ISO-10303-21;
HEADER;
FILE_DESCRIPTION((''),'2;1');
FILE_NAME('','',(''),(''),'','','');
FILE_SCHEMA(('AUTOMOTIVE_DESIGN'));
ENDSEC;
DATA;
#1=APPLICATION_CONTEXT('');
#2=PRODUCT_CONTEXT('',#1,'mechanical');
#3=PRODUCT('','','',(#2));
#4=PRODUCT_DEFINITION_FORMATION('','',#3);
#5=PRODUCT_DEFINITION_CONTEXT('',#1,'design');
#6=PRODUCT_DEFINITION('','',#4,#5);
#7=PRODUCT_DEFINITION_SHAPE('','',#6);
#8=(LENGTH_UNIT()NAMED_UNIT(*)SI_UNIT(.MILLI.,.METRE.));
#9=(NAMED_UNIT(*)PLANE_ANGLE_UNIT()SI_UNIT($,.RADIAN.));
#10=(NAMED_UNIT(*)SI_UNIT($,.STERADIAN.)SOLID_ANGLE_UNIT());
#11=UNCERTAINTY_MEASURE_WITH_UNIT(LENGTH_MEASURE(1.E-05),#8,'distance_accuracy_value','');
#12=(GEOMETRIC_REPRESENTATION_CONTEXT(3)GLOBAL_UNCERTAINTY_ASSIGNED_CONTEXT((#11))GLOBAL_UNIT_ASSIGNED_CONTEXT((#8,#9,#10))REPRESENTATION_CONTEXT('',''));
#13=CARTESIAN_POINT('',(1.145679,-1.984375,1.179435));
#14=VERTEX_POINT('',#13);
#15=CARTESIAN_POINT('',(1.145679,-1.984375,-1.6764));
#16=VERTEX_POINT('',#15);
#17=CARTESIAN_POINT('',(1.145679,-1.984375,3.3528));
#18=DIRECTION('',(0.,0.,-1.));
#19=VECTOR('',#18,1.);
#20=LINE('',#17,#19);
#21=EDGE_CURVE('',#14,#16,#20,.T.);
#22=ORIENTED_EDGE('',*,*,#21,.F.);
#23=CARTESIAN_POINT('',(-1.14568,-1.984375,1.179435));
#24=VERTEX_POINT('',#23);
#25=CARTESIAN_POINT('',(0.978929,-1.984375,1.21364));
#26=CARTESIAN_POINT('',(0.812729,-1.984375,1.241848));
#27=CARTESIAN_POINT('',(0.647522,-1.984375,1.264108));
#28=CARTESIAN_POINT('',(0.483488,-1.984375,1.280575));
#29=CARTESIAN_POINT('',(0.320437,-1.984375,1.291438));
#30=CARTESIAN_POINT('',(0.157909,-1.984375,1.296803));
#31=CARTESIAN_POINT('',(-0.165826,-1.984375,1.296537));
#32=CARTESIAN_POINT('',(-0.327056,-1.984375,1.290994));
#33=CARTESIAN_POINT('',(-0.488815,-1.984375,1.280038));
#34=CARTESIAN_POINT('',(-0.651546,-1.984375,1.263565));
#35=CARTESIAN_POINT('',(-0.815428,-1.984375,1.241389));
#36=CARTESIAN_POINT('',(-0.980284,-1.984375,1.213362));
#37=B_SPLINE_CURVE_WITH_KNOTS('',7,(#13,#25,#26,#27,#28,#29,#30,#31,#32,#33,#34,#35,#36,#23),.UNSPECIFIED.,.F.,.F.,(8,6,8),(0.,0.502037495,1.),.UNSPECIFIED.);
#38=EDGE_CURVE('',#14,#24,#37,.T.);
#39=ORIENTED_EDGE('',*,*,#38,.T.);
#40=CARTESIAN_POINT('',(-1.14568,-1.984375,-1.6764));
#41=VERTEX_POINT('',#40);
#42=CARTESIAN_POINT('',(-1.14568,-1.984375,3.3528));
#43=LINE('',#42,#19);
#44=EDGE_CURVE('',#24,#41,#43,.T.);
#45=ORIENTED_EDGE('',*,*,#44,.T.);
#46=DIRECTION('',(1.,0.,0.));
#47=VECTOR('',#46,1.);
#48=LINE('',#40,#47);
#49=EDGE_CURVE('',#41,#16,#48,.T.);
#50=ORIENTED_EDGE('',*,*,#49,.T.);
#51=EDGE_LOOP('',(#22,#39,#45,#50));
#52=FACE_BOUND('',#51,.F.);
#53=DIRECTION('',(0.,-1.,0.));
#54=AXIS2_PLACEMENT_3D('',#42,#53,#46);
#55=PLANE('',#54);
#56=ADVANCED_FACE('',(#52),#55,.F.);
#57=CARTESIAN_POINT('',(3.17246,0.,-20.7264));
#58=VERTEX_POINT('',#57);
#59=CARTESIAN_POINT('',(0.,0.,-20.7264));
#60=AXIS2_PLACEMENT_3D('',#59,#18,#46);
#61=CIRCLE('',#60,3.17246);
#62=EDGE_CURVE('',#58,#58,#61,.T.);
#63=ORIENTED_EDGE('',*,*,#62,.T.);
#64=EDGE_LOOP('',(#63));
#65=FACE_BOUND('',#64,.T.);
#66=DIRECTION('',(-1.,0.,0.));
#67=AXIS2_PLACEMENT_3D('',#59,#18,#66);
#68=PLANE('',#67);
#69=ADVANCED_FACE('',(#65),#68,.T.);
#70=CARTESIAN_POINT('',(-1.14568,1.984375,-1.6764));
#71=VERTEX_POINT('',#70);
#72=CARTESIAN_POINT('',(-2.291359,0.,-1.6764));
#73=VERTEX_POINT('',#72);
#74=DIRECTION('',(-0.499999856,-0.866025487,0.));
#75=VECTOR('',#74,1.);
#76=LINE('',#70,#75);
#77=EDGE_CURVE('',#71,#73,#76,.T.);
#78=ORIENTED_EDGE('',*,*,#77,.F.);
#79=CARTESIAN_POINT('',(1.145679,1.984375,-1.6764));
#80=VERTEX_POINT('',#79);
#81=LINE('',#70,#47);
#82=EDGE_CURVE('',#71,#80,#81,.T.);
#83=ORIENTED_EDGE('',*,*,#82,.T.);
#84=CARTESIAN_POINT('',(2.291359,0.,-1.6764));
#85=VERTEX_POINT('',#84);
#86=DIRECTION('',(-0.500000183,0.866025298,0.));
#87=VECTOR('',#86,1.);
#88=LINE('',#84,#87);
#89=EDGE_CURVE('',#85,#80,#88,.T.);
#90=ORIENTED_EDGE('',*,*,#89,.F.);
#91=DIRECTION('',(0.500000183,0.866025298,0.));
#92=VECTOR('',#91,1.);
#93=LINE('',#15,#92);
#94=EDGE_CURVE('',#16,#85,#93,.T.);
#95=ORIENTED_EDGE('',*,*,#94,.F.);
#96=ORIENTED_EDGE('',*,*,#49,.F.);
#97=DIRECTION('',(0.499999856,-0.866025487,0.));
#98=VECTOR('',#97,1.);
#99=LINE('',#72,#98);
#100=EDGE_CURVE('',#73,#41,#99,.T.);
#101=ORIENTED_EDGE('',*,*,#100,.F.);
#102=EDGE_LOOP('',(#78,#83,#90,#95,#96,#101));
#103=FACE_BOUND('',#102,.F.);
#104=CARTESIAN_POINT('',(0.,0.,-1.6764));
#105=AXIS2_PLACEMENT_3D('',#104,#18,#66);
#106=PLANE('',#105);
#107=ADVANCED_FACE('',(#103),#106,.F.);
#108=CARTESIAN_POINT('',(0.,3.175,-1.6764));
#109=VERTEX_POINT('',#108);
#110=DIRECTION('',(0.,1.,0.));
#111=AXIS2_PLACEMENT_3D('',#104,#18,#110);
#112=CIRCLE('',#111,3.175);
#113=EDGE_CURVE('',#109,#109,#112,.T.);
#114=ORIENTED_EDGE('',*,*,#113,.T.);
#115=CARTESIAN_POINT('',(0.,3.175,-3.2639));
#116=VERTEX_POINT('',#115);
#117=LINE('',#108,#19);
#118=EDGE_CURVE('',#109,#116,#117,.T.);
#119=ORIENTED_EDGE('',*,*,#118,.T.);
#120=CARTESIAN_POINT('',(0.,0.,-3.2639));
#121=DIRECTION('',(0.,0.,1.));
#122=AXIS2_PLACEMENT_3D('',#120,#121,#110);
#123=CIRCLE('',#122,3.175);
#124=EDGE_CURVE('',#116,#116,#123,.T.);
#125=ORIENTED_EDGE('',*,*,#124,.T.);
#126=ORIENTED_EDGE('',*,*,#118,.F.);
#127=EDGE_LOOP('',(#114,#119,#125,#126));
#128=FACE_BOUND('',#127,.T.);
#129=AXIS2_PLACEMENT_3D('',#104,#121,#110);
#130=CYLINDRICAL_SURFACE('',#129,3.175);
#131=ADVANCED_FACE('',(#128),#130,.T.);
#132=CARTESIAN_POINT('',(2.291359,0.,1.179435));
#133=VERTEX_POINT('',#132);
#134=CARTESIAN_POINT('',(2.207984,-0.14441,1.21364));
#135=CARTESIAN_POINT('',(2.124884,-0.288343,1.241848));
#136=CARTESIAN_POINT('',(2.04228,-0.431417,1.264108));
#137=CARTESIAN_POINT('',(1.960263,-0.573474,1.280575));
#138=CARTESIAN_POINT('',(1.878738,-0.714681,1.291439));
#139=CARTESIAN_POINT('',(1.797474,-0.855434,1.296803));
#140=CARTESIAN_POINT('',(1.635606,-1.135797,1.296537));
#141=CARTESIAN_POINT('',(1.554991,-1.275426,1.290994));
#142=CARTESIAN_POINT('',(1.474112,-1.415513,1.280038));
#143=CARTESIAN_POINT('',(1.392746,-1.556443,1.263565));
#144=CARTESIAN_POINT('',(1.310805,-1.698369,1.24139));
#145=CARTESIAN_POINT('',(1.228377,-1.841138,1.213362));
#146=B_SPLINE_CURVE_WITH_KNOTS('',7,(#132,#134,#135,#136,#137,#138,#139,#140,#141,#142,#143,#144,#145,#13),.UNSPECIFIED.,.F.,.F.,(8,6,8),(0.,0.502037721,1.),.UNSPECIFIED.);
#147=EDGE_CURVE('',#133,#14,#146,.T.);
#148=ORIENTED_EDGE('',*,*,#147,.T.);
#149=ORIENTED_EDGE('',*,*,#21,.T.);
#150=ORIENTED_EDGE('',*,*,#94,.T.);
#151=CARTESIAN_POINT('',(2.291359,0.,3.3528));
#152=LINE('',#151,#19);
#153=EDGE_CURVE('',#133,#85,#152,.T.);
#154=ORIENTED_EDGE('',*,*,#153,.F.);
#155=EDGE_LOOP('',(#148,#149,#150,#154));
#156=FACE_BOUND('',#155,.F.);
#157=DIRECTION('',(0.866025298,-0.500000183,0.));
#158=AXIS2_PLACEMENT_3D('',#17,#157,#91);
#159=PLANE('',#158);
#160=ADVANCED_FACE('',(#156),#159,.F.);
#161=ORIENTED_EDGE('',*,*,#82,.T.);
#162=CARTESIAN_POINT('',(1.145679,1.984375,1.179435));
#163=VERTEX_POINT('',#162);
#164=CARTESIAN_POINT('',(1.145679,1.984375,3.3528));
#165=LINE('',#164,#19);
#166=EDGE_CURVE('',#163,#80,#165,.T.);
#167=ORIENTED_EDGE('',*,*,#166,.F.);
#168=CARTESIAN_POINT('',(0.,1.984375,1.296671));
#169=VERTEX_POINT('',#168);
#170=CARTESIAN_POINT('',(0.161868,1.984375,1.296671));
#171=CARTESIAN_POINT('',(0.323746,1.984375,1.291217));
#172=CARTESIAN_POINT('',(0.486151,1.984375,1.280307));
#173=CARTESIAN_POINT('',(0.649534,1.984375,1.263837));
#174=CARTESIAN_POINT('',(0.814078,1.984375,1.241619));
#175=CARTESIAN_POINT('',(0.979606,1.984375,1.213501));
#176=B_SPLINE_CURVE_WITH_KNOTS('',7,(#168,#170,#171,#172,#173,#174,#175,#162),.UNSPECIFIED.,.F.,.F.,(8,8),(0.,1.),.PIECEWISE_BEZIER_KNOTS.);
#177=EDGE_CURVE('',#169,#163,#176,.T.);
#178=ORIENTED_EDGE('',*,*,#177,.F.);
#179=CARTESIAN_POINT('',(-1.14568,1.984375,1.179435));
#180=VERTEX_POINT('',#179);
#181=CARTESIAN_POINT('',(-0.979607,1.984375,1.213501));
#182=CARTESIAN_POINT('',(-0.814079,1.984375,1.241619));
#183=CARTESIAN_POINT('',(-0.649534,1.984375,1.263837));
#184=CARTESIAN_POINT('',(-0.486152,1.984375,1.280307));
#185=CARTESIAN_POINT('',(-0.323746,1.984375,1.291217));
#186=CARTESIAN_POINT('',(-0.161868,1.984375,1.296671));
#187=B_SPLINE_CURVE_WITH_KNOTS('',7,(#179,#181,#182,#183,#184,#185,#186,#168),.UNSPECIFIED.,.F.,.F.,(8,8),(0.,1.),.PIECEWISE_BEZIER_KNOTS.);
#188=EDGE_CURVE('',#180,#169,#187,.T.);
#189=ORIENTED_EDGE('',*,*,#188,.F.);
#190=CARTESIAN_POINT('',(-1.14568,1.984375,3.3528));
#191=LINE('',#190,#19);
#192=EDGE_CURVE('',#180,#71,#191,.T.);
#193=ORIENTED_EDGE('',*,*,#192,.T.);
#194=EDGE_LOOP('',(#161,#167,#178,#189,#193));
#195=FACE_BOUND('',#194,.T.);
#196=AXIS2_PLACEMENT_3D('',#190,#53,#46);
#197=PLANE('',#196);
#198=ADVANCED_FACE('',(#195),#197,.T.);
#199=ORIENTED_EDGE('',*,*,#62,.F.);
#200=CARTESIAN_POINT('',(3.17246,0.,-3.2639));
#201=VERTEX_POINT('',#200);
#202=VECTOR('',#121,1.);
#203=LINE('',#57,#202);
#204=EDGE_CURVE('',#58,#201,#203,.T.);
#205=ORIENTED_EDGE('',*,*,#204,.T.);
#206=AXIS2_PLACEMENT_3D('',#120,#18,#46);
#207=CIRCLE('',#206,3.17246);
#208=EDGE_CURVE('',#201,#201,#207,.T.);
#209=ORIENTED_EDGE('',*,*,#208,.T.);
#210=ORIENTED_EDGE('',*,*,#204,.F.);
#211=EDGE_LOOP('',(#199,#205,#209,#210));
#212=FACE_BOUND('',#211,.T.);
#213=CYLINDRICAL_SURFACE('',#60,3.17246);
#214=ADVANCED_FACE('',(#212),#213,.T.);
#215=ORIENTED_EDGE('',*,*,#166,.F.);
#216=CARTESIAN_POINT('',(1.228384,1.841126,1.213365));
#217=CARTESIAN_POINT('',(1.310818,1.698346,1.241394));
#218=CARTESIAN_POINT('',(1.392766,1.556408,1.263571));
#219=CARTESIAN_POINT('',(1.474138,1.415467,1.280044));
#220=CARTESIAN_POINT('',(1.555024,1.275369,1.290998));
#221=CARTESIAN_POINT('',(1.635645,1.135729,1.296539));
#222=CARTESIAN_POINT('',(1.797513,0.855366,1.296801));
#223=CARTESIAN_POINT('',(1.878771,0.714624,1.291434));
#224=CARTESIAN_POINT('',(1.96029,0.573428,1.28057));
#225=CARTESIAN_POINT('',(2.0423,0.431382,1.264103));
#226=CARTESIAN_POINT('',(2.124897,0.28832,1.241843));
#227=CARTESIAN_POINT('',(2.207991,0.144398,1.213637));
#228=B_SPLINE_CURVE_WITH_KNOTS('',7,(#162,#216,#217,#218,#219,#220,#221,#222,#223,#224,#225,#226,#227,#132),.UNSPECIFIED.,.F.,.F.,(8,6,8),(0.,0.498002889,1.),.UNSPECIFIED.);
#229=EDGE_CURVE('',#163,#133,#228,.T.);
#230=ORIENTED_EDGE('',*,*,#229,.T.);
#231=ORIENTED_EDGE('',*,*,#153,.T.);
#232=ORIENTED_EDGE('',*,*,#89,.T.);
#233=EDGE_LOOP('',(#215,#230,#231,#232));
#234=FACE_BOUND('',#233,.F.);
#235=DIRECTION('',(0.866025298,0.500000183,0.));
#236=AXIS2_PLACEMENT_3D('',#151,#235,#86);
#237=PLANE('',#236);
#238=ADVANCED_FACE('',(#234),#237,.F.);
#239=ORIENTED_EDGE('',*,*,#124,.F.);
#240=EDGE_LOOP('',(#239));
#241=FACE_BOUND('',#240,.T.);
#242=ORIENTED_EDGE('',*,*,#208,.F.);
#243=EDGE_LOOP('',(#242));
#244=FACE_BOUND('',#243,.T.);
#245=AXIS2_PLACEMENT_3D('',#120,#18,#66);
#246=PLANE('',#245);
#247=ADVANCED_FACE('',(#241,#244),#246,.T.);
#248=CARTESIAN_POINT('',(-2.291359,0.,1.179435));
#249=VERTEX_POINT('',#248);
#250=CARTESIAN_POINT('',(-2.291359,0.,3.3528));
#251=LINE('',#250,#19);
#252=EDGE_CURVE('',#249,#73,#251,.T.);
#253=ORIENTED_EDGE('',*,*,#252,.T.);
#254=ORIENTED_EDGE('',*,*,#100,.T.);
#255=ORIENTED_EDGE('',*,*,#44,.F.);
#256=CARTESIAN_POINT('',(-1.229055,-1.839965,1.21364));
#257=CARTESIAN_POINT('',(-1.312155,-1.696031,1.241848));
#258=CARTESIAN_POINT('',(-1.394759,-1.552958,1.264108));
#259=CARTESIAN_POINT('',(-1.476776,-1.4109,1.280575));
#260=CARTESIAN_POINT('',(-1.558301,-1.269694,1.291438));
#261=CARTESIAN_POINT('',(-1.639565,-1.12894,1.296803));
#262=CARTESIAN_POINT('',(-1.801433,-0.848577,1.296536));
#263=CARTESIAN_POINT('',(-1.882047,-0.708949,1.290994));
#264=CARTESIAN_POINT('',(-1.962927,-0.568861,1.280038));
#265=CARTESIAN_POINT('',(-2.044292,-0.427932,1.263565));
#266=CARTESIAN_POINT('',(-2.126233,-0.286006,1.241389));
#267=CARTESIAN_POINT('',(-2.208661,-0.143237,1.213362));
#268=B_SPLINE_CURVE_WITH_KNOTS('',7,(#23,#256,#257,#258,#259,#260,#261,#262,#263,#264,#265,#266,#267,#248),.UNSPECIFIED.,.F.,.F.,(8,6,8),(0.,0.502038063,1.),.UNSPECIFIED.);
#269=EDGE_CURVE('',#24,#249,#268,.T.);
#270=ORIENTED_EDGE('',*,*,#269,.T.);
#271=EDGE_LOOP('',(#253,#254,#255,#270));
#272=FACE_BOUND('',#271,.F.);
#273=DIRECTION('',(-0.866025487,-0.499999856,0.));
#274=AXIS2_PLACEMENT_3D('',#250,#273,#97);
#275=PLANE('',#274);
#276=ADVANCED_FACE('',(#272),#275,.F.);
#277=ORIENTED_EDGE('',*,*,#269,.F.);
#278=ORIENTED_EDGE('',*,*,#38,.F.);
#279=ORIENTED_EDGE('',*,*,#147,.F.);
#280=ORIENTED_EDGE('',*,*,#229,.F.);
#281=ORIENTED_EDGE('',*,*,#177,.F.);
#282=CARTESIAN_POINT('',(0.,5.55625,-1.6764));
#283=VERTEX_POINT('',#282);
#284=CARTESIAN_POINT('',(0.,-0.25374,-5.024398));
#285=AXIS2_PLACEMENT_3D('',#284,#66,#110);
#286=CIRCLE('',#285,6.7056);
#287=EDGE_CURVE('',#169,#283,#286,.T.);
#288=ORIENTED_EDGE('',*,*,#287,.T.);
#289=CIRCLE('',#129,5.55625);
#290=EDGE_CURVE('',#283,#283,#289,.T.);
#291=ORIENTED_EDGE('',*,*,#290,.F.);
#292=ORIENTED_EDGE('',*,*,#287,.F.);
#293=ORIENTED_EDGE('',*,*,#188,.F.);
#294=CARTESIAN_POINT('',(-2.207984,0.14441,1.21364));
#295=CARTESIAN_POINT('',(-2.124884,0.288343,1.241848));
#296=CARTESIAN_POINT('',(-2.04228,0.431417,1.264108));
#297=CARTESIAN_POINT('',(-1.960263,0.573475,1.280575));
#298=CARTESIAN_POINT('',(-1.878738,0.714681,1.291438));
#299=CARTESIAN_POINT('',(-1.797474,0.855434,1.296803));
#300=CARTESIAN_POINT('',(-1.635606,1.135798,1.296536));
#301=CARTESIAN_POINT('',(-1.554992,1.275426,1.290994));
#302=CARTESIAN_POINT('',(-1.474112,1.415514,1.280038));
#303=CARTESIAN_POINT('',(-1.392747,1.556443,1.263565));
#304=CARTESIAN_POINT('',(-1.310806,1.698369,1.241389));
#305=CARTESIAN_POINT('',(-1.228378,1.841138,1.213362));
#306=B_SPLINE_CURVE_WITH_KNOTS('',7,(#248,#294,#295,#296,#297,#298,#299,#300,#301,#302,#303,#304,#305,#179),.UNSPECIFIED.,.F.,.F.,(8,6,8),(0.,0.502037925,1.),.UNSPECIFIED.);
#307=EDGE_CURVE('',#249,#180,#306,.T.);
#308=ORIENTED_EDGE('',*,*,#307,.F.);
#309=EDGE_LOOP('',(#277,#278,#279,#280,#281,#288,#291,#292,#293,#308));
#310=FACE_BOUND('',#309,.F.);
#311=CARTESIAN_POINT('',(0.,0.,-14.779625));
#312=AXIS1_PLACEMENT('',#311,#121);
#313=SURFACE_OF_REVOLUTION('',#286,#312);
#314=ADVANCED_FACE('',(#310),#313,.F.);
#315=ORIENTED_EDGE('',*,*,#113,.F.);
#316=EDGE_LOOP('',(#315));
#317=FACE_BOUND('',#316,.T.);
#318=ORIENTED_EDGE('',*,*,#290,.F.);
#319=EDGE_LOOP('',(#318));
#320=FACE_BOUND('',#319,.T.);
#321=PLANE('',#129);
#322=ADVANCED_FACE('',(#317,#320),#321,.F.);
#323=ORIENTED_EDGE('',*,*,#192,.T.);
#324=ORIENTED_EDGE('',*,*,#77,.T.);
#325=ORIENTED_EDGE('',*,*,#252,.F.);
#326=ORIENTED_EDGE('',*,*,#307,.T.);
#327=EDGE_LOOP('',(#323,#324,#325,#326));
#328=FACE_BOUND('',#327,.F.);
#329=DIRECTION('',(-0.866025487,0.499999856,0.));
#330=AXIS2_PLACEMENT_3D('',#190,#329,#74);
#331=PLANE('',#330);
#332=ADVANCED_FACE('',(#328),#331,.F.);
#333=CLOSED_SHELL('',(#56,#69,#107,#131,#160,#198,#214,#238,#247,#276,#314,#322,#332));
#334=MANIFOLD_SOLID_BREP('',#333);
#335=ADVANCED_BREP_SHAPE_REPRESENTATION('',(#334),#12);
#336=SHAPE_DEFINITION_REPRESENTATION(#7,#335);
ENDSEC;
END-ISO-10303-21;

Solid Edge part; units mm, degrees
sketch "Sketch1" plane through (0, 0, 0) normal (1, 0, 0) x (0, 1, 0)
  line L0 (0, -1.6764) -> (0, 1.6764)
  arc A0 (0, 1.6764) -> (5.55625, -1.6764) centre (-0.25374, -5.024398) cw
  line L1 (0, -1.6764) -> (5.55625, -1.6764)
  dimension "D1" = 3.3528
  dimension "D2" = 6.7056
revolve "RevolvedProtrusion1" add sketch "Sketch1" angle 360 about axis through (0, 0, -14.779625) along (0, 0, 1)
sketch "Sketch2" plane through (0, 0, -1.6764) normal (0, 0, -1) x (0, 1, 0)
  circle A0 centre (0, 0) radius 3.175
  dimension "D1" = 6.35
extrude "Protrusion1" add sketch "Sketch2" along normal blind 19.05
sketch "Sketch3" plane through (0, 0, -20.7264) normal (0, 0, -1) x (1, 0, 0)
  circle A0 centre (0, 0) radius 3.17246
  dimension "D1" = 0.0025
extrude "Cutout1" cut sketch "Sketch3" against normal blind 17.4625 flip side to cut
sketch "Sketch4" plane through (-0.603226, 0.360624, 3.3528) normal (0, 0, 1) x (1, 0, 0)
  line L0 (-0.542454, 1.623751) -> (1.748905, 1.623751)
  line L1 (2.894585, -0.360624) -> (1.748905, 1.623751)
  line L2 (1.748905, -2.344999) -> (2.894585, -0.360624)
  line L3 (-0.542454, -2.344999) -> (1.748905, -2.344999)
  line L4 (-1.688133, -0.360624) -> (-0.542454, -2.344999)
  line L5 (-0.542454, 1.623751) -> (-1.688133, -0.360624)
extrude "ExtrudedCutout_11" cut sketch "Sketch4" against normal blind 5.0292
properties part number "212212"
